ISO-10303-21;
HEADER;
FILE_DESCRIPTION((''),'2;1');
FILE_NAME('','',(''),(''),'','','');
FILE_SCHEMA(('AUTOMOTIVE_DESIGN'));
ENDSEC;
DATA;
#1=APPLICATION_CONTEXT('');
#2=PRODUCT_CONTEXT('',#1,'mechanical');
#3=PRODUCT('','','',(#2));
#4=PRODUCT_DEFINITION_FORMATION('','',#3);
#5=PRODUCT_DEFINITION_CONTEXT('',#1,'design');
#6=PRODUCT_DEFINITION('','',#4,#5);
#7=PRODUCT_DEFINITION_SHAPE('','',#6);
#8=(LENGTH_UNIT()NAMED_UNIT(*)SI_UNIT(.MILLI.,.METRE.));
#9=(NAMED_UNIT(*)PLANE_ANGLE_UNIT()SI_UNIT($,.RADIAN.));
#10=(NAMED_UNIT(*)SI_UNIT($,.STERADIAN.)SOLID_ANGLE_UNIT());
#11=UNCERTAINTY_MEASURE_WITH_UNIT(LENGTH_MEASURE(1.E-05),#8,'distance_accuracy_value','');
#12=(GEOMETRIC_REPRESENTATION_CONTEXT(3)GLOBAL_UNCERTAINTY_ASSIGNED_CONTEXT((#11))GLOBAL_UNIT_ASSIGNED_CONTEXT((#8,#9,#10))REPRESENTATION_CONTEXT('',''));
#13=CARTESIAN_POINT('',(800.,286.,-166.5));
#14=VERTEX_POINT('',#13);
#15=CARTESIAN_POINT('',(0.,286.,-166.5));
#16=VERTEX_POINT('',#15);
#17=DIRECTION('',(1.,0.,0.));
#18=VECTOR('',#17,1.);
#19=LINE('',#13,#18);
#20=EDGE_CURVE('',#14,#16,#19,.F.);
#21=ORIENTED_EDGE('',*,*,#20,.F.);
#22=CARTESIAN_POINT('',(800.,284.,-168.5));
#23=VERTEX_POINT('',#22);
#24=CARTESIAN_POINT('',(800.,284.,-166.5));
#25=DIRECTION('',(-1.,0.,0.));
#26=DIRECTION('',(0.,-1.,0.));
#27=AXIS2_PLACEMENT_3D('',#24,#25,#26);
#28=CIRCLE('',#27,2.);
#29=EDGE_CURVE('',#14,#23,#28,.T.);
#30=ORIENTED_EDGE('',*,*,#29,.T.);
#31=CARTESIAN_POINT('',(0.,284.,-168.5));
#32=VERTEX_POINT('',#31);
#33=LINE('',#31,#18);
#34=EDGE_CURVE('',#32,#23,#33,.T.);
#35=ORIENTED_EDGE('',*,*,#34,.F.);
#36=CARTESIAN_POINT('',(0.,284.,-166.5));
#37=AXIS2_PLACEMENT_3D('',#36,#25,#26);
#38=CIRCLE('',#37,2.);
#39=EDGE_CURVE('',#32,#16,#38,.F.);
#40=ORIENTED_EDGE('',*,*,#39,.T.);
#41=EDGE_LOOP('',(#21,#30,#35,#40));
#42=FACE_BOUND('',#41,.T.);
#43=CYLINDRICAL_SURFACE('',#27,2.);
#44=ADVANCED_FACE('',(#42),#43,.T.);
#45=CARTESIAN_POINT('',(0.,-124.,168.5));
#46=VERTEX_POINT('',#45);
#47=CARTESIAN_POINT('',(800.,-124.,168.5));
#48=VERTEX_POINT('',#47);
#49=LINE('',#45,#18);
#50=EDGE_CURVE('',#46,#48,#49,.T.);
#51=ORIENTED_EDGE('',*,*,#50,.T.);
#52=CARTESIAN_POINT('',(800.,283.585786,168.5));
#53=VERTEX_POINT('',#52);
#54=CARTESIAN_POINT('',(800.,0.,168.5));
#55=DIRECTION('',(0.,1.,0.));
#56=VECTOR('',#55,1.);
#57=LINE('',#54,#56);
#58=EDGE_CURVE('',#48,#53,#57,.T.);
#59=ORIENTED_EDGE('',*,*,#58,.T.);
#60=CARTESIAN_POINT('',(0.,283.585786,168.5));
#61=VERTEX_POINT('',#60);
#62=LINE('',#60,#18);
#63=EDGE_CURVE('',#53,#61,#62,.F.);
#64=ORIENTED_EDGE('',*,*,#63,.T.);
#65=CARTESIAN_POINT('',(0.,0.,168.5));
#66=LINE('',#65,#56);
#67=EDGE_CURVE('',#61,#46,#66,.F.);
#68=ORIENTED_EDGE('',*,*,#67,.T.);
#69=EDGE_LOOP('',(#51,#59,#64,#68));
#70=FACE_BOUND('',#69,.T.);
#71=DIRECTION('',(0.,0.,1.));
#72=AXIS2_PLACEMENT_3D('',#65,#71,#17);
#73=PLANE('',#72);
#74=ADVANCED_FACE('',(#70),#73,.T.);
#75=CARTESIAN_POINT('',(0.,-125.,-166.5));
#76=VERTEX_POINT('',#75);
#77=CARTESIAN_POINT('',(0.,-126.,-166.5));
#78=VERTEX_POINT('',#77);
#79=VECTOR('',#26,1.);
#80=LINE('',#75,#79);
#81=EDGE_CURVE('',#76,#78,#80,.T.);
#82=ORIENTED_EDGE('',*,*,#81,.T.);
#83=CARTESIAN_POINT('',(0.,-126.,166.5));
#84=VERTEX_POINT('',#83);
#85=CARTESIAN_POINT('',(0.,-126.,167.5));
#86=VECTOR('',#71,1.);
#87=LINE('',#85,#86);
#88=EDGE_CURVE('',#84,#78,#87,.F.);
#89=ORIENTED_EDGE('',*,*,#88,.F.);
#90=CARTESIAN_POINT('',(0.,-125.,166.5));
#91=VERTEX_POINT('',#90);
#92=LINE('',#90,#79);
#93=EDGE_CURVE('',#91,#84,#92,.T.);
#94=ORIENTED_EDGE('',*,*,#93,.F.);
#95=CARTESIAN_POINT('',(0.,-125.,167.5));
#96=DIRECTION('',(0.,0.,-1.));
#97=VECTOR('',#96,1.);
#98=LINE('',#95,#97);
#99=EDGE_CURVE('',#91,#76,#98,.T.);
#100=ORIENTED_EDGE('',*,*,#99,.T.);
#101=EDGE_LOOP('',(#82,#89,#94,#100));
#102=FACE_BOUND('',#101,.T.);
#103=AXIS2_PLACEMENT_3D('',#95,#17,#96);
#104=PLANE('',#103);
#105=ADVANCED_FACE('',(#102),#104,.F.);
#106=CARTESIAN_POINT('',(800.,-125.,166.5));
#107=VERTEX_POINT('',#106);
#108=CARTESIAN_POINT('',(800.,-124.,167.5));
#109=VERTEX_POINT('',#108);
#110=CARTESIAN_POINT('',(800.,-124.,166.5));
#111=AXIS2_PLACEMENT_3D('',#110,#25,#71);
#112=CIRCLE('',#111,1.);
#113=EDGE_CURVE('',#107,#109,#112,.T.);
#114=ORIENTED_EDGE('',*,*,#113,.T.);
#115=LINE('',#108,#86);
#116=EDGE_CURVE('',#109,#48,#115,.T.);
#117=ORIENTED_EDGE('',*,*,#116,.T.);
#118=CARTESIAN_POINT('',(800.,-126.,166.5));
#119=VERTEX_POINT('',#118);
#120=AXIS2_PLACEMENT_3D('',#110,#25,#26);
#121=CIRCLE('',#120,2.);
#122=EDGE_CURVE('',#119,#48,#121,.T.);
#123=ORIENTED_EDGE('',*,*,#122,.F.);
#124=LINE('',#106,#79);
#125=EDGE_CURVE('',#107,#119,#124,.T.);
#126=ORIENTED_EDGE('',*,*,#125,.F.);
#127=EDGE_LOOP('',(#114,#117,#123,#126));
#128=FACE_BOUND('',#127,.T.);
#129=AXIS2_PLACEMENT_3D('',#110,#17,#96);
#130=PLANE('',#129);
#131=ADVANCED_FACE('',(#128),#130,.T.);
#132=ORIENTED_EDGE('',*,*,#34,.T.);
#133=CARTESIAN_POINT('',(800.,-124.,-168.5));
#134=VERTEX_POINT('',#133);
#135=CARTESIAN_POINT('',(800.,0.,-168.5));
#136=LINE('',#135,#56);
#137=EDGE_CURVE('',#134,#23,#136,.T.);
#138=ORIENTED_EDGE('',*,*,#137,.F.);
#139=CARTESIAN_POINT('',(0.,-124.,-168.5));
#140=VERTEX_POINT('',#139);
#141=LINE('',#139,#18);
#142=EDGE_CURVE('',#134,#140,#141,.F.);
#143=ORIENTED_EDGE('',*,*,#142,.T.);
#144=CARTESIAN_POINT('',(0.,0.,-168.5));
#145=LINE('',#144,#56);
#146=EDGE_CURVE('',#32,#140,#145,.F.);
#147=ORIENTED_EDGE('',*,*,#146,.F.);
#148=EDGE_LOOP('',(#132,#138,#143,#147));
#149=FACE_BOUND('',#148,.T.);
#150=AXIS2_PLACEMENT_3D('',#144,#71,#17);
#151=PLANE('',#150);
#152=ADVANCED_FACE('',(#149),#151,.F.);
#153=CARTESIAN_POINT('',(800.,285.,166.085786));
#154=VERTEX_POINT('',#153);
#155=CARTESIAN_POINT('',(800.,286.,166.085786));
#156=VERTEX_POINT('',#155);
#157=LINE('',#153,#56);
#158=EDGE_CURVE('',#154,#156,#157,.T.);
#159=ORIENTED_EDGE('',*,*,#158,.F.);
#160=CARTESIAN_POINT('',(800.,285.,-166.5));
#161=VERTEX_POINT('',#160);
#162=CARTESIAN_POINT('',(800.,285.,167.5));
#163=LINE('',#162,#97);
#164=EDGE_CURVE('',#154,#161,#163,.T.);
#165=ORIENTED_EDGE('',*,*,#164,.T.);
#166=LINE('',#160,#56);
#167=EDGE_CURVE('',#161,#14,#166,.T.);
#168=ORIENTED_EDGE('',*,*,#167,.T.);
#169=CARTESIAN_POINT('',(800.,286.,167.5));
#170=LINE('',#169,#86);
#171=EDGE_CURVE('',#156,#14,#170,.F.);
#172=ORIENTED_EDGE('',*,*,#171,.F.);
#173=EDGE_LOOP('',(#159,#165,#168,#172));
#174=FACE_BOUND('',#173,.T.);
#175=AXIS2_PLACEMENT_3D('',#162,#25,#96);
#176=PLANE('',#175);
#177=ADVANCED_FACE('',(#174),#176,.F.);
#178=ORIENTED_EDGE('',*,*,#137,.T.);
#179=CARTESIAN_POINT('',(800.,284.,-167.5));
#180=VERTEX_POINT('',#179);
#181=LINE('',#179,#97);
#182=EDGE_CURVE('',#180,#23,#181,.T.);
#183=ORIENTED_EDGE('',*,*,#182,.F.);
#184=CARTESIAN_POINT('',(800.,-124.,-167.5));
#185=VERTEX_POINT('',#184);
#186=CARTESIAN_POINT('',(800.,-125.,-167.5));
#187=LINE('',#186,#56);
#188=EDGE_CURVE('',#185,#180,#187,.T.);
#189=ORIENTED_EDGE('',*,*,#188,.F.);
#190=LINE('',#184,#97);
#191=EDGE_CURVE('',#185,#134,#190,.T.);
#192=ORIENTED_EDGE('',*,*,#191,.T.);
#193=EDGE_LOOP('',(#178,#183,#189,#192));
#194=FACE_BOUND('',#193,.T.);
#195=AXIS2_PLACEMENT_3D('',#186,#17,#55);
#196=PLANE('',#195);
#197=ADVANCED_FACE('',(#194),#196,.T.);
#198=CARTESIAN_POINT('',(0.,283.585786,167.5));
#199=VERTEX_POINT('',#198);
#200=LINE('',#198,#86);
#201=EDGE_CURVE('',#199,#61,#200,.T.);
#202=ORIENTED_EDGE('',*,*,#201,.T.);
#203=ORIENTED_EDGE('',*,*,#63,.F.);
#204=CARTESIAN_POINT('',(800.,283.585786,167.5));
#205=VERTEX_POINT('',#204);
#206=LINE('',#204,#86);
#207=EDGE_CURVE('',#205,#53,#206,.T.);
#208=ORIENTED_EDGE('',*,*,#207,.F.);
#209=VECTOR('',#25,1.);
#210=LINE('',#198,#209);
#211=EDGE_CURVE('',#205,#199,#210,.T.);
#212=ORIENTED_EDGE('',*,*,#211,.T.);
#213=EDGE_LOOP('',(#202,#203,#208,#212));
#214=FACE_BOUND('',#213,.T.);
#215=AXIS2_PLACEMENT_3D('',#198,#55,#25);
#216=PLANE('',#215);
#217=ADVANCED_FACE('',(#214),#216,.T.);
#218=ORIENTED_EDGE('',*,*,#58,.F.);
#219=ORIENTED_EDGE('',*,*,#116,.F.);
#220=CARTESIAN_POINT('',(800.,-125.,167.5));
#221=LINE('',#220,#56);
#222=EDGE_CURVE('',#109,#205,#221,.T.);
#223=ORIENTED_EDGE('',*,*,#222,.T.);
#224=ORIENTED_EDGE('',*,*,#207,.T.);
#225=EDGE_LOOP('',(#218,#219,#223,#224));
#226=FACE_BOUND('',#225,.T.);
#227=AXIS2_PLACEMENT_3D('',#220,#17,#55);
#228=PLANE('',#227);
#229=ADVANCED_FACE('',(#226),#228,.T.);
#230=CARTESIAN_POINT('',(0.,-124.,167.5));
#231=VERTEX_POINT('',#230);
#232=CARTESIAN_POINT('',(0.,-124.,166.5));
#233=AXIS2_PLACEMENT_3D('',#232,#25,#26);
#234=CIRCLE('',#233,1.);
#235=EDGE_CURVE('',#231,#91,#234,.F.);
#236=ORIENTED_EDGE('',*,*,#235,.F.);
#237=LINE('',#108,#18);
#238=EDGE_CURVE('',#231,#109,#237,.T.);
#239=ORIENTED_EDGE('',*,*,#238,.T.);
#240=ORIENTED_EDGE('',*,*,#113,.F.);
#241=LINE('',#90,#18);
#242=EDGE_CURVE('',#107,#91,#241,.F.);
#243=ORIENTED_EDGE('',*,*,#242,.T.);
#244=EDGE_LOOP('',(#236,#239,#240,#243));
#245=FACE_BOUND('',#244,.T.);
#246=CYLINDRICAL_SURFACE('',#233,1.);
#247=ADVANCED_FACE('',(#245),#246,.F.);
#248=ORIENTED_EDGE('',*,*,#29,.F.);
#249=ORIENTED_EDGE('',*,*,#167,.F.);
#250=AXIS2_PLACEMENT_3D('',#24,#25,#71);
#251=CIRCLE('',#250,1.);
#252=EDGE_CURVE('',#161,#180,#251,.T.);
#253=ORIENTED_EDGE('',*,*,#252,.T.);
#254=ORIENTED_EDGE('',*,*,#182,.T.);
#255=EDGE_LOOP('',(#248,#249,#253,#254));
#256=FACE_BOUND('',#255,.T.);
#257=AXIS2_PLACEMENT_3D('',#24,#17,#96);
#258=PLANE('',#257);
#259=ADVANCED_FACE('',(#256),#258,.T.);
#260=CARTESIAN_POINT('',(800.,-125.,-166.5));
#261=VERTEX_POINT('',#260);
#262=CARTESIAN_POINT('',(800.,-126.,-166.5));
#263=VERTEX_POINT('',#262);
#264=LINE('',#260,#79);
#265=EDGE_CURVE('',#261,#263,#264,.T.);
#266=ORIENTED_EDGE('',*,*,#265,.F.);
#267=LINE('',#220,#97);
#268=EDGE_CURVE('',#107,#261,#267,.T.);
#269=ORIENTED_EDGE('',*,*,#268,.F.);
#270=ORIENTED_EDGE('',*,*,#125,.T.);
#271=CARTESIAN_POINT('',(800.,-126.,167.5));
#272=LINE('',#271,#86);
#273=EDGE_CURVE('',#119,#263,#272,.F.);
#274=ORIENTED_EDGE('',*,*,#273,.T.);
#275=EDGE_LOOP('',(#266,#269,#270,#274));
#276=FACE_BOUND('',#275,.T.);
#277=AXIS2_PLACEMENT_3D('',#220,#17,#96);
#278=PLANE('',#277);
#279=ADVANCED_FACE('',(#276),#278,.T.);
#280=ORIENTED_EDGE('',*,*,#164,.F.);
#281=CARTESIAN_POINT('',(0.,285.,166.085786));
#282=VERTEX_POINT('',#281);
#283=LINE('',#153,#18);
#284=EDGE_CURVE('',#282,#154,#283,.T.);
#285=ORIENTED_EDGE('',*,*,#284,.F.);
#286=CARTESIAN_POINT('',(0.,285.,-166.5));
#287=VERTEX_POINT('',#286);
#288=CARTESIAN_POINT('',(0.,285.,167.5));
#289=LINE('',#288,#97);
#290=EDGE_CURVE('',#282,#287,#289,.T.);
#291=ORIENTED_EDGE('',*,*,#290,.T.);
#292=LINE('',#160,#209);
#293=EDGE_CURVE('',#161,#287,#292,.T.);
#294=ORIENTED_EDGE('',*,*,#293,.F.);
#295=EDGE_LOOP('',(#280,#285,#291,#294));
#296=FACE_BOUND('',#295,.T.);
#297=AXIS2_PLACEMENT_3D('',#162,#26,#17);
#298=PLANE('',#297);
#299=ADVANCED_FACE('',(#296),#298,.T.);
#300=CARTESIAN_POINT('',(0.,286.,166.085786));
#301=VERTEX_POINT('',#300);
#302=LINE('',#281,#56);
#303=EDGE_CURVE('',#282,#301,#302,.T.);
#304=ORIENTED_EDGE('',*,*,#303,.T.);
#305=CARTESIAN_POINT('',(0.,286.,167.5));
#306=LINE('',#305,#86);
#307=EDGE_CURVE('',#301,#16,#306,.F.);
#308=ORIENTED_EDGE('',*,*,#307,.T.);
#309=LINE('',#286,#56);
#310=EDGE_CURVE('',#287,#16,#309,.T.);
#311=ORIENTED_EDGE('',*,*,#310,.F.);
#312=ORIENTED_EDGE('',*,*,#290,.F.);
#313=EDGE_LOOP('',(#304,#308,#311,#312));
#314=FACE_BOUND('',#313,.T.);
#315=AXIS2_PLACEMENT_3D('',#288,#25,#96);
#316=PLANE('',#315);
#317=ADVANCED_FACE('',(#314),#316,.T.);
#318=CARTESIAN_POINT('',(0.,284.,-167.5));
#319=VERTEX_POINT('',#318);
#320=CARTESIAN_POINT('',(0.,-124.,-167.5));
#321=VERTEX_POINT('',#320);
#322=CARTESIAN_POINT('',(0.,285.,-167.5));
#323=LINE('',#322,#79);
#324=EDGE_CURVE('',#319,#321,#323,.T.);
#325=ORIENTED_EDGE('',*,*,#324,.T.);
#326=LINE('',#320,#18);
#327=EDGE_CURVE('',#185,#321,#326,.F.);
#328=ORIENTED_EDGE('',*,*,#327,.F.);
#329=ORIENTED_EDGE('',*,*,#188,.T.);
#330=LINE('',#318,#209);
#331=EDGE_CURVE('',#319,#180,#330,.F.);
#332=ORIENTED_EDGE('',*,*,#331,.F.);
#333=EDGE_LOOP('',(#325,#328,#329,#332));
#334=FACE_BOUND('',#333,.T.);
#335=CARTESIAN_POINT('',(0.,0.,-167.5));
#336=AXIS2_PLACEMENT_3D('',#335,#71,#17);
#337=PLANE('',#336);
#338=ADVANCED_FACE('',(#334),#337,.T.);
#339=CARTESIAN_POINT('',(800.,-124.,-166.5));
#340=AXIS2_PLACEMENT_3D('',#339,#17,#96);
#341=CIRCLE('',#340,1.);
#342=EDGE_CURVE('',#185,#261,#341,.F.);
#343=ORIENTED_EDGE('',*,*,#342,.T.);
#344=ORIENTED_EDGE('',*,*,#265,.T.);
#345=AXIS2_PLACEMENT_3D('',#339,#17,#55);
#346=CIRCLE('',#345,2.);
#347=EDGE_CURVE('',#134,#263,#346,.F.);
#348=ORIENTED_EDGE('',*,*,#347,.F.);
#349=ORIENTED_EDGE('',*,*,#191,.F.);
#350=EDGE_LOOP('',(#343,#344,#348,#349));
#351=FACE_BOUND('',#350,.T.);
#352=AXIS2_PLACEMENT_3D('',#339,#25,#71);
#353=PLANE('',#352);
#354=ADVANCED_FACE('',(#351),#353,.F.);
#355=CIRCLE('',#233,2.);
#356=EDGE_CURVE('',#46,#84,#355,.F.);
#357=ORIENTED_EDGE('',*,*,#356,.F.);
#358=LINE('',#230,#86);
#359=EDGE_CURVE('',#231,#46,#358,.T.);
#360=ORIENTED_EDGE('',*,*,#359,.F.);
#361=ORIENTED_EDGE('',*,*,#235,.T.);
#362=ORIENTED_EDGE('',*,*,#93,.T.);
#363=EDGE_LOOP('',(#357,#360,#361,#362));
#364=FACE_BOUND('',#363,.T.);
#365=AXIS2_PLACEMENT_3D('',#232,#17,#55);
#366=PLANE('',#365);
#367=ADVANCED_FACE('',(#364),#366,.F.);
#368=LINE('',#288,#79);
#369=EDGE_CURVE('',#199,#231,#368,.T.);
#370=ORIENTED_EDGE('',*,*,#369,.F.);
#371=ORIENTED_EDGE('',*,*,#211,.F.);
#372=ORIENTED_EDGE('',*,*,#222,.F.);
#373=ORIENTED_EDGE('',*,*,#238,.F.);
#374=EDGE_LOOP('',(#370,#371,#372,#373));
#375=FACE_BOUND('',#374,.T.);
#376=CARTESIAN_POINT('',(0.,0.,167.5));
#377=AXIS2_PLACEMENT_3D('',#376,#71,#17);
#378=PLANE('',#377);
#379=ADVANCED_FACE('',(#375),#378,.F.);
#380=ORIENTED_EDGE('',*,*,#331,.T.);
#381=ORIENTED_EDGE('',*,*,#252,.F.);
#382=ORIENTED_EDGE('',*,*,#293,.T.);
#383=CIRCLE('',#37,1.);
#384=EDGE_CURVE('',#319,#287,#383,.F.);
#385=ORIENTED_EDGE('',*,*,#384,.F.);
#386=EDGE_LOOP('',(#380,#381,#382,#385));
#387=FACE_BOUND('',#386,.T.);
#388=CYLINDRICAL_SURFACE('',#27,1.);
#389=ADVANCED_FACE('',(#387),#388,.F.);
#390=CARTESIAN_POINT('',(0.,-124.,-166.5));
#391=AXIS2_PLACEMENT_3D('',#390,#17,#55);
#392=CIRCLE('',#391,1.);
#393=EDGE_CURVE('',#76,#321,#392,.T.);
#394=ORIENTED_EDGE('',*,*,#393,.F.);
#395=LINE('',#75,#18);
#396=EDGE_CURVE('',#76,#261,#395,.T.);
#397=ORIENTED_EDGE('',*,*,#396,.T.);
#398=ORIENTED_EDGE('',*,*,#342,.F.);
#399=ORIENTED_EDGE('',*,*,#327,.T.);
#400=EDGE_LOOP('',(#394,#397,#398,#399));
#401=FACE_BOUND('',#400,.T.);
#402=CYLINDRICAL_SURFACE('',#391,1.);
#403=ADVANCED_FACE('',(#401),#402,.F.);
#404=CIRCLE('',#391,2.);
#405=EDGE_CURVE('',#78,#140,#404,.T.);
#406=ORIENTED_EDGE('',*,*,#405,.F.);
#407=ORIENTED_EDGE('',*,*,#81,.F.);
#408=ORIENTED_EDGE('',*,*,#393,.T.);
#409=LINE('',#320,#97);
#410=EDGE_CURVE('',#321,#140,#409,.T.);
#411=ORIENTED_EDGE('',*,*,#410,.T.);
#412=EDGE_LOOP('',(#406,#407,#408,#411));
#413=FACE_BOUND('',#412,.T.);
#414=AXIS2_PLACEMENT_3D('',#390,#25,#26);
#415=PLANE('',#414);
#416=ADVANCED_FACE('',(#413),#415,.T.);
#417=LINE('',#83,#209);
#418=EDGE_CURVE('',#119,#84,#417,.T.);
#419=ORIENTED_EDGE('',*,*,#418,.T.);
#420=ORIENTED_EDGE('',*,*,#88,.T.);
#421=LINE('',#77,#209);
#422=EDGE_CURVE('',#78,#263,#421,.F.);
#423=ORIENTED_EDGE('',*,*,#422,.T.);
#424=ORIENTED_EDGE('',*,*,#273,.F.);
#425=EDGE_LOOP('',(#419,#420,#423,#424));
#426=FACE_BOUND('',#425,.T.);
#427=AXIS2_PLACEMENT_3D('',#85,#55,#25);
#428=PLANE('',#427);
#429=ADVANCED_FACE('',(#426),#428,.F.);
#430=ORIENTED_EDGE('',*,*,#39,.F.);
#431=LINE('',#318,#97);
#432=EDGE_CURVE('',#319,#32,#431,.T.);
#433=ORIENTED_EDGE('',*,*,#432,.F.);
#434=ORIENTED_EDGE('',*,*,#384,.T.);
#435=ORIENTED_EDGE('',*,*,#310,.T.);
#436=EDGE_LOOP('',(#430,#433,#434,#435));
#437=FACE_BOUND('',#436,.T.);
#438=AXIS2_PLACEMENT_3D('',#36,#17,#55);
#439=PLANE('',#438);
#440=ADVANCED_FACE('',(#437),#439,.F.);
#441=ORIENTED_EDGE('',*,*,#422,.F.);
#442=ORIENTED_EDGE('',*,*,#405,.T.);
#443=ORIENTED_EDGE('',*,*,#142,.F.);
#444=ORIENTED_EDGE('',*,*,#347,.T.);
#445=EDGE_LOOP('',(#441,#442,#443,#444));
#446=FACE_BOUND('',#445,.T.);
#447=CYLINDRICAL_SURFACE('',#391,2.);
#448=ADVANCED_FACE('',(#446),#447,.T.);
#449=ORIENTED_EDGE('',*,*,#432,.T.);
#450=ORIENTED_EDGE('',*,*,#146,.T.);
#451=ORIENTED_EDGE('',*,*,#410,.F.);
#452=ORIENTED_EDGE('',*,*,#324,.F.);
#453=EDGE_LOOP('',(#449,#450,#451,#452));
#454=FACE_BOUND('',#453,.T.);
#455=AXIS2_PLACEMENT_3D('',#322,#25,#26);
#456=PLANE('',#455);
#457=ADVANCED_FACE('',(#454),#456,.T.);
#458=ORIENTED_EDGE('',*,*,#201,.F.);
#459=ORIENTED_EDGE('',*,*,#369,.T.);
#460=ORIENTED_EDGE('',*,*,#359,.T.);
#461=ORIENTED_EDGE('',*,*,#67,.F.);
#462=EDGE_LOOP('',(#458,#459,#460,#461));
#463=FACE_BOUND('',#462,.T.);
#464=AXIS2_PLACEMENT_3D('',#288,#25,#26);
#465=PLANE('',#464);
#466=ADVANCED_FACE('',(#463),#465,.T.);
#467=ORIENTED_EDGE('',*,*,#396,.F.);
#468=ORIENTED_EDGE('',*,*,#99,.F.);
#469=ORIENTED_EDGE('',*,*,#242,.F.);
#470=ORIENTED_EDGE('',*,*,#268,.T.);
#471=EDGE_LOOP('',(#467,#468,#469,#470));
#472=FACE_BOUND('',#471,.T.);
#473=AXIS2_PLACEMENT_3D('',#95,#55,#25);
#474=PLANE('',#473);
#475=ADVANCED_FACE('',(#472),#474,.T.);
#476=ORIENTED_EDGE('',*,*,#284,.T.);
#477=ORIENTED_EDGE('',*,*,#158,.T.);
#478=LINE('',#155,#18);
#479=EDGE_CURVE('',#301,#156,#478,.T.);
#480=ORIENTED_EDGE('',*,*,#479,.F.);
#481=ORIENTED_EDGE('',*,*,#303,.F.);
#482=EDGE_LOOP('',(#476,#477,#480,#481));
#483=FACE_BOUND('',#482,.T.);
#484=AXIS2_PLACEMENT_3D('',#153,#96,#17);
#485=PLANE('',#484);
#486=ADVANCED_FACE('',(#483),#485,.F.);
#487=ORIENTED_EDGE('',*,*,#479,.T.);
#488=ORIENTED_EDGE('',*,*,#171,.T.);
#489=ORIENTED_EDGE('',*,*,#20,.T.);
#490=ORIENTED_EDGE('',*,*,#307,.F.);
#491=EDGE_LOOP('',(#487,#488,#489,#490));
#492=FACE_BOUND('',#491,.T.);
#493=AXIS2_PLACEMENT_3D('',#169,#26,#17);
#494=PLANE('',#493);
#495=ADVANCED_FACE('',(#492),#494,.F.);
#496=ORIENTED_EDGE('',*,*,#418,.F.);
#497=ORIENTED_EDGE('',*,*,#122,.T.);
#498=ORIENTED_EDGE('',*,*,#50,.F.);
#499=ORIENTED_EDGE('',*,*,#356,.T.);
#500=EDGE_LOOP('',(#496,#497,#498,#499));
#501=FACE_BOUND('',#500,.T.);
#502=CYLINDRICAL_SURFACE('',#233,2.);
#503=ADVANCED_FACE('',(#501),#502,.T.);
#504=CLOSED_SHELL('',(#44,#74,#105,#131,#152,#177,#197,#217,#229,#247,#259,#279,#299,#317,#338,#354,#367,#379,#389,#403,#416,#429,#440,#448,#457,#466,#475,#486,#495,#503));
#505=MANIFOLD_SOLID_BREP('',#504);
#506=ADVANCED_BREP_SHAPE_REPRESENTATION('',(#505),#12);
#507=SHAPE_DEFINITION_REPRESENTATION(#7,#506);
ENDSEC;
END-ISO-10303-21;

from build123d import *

# Parameters (mm, degrees)
SKETCH1_W              = 800
SKETCH1_H              = 410
BOSS_EXTRUDE1_DEPTH    = 167.5
CONVERT_SOLID1_DEPTH   = 800
CONVERT_SOLID1_2_DEPTH = 800


# Read off the part's stored shape, not the designer's step: Convert-Solid1
with BuildPart() as part:
    # Sketch1 → Boss-Extrude1 (new, symmetric)
    with BuildSketch(Plane.XY):
        with Locations((400, 80)):
            Rectangle(SKETCH1_W, SKETCH1_H)
    extrude(amount=BOSS_EXTRUDE1_DEPTH, both=True)

    # Convert-Solid1 outline → Convert-Solid1 (cut)
    with BuildSketch(Plane.YZ):
        with BuildLine():
            Line((285, 167.5), (-124, 167.5))
            ThreePointArc((-124, 167.5), (-124.707106781, 167.207106781), (-125, 166.5))
            Line((-125, 166.5), (-125, -166.5))
            ThreePointArc((-125, -166.5), (-124.707106781, -167.207106781), (-124, -167.5))
            Line((-124, -167.5), (284, -167.5))
            ThreePointArc((284, -167.5), (284.707106781, -167.207106781), (285, -166.5))
            Line((285, -166.5), (285, 167.5))
        make_face()
    extrude(amount=CONVERT_SOLID1_DEPTH, mode=Mode.SUBTRACT)

    # Convert-Solid1 2 outline → Convert-Solid1 2 (add)
    with BuildSketch(Plane.YZ):
        with BuildLine():
            Line((-125, 167.5), (283.585786438, 167.5))
            Line((283.585786438, 167.5), (283.585786438, 168.5))
            Line((283.585786438, 168.5), (-124, 168.5))
            ThreePointArc((-124, 168.5), (-125.414213562, 167.914213562), (-126, 166.5))
            Line((-126, 166.5), (-126, -166.5))
            ThreePointArc((-126, -166.5), (-125.414213562, -167.914213562), (-124, -168.5))
            Line((-124, -168.5), (284, -168.5))
            ThreePointArc((284, -168.5), (285.414213562, -167.914213562), (286, -166.5))
            Line((286, -166.5), (286, 166.085786438))
            Line((286, 166.085786438), (285, 166.085786438))
            Line((285, 166.085786438), (285, -167.5))
            Line((285, -167.5), (-125, -167.5))
            Line((-125, -167.5), (-125, 167.5))
        make_face()
    extrude(amount=CONVERT_SOLID1_2_DEPTH)


solid = part.part
